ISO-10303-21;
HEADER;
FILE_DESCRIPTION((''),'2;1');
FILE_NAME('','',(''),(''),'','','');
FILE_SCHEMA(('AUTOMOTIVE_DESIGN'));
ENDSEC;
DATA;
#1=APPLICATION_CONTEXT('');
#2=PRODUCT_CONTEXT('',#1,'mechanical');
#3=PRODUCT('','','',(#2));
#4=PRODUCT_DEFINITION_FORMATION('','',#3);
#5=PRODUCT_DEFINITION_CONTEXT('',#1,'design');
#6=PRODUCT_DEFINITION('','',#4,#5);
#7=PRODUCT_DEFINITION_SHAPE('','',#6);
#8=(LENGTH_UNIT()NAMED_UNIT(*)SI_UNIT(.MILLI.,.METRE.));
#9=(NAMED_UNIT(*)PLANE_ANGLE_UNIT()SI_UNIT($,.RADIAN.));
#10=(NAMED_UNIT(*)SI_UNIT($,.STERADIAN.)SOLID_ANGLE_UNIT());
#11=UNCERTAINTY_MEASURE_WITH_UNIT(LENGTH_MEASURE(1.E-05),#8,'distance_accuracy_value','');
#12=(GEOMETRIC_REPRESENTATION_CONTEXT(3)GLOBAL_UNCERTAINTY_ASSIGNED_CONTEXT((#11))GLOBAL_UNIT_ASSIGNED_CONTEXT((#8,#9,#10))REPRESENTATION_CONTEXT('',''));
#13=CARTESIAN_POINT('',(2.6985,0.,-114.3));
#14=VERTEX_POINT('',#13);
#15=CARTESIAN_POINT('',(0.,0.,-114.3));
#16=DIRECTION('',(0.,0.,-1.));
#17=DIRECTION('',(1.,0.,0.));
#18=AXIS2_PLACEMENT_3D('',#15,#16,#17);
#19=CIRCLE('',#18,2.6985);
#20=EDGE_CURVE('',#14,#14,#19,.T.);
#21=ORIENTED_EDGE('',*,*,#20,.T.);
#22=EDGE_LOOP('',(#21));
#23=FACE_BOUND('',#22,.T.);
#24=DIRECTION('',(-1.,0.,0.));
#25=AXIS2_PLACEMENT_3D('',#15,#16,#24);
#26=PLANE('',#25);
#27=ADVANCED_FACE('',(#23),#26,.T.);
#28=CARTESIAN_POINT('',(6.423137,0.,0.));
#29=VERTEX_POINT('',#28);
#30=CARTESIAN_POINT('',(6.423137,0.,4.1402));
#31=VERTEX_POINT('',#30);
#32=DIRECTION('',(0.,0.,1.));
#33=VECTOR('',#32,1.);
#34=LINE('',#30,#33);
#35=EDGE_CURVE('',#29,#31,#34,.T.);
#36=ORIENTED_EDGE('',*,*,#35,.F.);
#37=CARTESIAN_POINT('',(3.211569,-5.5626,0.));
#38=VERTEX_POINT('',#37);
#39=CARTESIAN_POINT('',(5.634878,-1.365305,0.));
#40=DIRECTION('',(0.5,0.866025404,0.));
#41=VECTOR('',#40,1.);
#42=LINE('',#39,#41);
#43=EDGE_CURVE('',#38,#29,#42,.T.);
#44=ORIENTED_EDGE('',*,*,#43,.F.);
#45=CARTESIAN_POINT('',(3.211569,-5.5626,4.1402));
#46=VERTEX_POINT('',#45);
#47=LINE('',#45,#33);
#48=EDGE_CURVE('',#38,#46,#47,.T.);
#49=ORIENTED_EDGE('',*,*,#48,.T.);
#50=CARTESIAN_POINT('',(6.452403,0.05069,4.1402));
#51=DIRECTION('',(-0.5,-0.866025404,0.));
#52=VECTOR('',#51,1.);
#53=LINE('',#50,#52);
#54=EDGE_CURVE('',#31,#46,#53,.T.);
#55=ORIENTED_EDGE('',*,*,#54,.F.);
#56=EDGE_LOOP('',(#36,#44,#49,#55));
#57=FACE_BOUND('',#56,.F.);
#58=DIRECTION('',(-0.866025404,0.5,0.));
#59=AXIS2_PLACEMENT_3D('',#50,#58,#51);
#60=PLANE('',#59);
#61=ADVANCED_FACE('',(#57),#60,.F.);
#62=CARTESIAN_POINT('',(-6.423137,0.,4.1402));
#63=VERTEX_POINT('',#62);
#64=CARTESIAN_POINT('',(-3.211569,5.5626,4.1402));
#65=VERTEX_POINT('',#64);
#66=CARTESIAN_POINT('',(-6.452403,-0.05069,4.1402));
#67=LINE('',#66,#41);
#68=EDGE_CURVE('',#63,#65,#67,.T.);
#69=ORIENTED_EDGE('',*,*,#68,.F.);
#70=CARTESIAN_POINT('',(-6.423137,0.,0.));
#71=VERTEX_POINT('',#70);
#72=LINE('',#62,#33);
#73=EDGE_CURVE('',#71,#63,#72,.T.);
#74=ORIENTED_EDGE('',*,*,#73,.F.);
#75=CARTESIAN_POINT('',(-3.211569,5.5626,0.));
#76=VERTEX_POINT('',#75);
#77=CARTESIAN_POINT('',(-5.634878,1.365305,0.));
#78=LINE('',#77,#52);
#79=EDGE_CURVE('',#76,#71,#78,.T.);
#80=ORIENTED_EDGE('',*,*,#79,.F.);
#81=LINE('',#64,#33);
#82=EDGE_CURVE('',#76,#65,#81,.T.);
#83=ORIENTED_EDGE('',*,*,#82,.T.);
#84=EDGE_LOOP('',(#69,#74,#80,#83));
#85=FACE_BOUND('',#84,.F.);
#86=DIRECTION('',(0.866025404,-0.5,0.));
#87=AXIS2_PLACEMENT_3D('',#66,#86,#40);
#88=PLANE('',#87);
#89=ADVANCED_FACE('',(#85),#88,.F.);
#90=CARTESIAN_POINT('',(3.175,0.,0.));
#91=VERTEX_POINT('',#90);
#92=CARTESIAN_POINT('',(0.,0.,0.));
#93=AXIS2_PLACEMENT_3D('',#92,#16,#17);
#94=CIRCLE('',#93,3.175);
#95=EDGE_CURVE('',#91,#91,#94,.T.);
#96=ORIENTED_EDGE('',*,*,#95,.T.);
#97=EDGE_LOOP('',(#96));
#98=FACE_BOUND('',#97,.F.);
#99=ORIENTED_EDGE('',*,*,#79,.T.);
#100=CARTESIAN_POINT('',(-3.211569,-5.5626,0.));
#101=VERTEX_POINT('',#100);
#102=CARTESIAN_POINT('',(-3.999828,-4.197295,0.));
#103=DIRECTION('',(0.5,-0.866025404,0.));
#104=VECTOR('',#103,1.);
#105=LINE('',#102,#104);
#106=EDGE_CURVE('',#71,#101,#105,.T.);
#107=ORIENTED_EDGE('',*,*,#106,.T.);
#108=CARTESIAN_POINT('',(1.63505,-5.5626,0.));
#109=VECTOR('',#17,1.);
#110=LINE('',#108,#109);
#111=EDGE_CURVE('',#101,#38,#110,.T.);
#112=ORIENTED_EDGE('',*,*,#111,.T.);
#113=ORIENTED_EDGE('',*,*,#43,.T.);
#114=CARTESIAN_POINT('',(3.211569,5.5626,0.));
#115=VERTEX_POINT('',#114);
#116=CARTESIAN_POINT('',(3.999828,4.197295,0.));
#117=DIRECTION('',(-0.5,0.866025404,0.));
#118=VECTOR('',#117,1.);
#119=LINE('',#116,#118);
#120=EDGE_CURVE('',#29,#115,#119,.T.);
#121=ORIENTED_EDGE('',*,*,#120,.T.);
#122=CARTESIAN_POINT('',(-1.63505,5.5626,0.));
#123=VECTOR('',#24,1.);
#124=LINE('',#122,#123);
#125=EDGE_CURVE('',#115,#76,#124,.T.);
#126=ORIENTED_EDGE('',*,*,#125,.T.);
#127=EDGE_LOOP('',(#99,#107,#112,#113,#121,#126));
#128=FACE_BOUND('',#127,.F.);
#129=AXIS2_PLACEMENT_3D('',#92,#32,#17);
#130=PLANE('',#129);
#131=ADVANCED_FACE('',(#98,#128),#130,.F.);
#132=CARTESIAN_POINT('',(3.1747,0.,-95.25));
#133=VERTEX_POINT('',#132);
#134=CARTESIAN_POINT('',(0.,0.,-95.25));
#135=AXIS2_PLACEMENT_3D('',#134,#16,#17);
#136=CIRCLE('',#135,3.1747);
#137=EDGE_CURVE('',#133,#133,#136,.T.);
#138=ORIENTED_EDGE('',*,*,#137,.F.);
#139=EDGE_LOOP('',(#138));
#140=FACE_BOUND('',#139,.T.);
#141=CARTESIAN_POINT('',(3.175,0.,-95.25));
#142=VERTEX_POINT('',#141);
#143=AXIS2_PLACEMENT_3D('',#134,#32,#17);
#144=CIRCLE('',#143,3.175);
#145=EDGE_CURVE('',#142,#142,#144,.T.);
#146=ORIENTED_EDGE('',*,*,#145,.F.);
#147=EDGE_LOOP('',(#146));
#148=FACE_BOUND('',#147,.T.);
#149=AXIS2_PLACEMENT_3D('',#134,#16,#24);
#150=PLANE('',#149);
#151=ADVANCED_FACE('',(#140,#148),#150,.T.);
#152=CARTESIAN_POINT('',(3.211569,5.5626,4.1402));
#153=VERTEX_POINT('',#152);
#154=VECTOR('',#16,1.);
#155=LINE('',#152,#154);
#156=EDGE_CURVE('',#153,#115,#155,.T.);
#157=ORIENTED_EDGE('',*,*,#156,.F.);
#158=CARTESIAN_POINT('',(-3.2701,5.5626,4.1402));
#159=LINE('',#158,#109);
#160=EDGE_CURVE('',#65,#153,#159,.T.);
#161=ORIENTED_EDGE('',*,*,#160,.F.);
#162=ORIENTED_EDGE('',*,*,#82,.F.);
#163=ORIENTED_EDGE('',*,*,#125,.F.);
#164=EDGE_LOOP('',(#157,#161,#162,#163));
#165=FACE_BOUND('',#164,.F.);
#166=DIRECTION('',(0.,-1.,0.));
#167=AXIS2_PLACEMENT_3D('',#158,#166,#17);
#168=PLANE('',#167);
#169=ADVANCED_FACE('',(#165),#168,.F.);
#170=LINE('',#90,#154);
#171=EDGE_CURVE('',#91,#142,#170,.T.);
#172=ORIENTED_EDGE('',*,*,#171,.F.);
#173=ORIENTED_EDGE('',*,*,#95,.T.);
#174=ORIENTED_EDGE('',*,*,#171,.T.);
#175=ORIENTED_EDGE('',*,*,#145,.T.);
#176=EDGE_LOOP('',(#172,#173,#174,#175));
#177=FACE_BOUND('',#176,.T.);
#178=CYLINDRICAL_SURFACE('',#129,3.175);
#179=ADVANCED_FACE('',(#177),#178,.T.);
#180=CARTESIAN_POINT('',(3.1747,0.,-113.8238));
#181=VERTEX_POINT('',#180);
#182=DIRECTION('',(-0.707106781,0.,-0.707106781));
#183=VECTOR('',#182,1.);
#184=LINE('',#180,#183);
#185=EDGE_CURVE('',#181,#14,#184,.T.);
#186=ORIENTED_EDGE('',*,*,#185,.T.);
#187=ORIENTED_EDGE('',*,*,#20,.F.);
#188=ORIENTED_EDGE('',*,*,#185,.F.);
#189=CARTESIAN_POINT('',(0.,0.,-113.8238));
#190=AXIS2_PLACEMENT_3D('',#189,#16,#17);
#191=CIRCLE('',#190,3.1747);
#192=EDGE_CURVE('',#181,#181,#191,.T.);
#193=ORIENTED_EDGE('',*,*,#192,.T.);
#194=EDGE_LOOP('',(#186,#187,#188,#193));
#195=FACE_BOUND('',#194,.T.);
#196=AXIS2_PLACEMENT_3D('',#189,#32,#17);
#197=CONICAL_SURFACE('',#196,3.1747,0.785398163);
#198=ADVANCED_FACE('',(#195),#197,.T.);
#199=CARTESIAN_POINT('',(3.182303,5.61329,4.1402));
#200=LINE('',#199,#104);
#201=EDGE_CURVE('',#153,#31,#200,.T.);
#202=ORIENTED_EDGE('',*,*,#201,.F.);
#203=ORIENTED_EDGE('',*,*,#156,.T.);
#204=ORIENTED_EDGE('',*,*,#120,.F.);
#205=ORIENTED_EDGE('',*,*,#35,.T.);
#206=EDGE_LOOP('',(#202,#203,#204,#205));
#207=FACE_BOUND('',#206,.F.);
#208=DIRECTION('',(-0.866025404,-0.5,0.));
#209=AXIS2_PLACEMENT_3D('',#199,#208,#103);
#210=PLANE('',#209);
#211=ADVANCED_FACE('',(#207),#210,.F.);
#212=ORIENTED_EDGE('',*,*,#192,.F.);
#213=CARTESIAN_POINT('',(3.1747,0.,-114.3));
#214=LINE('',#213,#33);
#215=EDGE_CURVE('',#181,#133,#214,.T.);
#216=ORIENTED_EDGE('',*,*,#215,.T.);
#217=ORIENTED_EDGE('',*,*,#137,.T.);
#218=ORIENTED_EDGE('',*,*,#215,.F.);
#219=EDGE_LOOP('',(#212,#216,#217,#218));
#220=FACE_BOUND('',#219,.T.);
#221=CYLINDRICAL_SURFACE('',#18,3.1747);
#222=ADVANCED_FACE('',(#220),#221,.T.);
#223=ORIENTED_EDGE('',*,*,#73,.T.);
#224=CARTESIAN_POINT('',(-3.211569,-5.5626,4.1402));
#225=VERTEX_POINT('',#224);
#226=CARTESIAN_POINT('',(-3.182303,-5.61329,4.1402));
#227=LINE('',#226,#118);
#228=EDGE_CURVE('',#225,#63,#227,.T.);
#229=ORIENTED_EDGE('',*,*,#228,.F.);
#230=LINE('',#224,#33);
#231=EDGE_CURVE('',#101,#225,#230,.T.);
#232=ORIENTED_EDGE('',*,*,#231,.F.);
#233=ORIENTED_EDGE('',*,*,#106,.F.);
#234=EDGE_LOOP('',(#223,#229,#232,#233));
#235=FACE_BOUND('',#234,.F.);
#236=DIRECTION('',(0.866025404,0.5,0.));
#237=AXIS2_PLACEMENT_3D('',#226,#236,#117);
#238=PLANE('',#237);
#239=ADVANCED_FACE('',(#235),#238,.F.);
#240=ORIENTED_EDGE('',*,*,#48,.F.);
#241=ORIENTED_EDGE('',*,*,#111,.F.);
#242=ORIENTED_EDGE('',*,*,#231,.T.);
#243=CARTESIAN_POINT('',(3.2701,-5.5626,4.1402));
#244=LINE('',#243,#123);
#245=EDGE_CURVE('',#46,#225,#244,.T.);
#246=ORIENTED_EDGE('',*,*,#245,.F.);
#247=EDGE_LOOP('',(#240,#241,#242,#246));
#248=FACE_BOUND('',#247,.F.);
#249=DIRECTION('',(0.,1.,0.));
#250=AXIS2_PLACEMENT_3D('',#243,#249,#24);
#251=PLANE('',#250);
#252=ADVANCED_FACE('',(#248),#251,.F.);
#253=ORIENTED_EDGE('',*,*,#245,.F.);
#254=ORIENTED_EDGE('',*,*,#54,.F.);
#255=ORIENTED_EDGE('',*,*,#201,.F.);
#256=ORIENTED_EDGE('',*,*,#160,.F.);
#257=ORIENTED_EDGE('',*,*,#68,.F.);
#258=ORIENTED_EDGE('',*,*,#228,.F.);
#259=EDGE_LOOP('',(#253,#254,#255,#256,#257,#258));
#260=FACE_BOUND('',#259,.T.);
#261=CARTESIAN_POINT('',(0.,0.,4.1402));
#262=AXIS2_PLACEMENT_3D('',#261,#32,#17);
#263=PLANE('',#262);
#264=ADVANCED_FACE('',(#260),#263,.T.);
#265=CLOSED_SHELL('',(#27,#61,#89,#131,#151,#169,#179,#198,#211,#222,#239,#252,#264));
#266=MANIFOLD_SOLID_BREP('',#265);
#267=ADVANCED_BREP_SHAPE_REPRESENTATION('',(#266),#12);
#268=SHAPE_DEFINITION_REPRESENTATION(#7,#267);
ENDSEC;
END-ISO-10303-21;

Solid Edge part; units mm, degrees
sketch "Sketch1" plane through (0, 0, 0) normal (0, 0, 1) x (1, 0, 0)
  circle A0 centre (0, 0) radius 6.4526
  dimension "D1" = 12.9052
extrude "Protrusion1" add sketch "Sketch1" along normal blind 4.1402
sketch "Sketch2" plane through (0, 0, 0) normal (0, 0, -1) x (1, 0, 0)
  circle A0 centre (0, 0) radius 3.175
extrude "Protrusion2" add sketch "Sketch2" along normal blind 114.3
sketch "Sketch3" plane through (0, 0, -114.3) normal (0, 0, -1) x (1, 0, 0)
  circle A0 centre (0, 0) radius 3.1747
extrude "Cutout1" cut sketch "Sketch3" against normal blind 19.05 flip side to cut
chamfer "Chamfer_1" distance 0.4762 angle 45 1 edges at (-3.1747, 0, -114.3)
sketch "Sketch4" plane through (0, 0, 4.1402) normal (0, 0, 1) x (1, 0, 0)
  line L0 (-3.2701, 5.5626) -> (3.2701, 5.5626)
  dimension "D1" = 11.1252
extrude "Cutout2" cut sketch "Sketch4" against normal up to next material side at (0, 5.6126, 4.1402)
pattern_circular "Pattern1" count 6 over 360 about axis through (0, 0, 4.1402) along (0, 0, 1) of "Cutout2"
properties part number "118120"
